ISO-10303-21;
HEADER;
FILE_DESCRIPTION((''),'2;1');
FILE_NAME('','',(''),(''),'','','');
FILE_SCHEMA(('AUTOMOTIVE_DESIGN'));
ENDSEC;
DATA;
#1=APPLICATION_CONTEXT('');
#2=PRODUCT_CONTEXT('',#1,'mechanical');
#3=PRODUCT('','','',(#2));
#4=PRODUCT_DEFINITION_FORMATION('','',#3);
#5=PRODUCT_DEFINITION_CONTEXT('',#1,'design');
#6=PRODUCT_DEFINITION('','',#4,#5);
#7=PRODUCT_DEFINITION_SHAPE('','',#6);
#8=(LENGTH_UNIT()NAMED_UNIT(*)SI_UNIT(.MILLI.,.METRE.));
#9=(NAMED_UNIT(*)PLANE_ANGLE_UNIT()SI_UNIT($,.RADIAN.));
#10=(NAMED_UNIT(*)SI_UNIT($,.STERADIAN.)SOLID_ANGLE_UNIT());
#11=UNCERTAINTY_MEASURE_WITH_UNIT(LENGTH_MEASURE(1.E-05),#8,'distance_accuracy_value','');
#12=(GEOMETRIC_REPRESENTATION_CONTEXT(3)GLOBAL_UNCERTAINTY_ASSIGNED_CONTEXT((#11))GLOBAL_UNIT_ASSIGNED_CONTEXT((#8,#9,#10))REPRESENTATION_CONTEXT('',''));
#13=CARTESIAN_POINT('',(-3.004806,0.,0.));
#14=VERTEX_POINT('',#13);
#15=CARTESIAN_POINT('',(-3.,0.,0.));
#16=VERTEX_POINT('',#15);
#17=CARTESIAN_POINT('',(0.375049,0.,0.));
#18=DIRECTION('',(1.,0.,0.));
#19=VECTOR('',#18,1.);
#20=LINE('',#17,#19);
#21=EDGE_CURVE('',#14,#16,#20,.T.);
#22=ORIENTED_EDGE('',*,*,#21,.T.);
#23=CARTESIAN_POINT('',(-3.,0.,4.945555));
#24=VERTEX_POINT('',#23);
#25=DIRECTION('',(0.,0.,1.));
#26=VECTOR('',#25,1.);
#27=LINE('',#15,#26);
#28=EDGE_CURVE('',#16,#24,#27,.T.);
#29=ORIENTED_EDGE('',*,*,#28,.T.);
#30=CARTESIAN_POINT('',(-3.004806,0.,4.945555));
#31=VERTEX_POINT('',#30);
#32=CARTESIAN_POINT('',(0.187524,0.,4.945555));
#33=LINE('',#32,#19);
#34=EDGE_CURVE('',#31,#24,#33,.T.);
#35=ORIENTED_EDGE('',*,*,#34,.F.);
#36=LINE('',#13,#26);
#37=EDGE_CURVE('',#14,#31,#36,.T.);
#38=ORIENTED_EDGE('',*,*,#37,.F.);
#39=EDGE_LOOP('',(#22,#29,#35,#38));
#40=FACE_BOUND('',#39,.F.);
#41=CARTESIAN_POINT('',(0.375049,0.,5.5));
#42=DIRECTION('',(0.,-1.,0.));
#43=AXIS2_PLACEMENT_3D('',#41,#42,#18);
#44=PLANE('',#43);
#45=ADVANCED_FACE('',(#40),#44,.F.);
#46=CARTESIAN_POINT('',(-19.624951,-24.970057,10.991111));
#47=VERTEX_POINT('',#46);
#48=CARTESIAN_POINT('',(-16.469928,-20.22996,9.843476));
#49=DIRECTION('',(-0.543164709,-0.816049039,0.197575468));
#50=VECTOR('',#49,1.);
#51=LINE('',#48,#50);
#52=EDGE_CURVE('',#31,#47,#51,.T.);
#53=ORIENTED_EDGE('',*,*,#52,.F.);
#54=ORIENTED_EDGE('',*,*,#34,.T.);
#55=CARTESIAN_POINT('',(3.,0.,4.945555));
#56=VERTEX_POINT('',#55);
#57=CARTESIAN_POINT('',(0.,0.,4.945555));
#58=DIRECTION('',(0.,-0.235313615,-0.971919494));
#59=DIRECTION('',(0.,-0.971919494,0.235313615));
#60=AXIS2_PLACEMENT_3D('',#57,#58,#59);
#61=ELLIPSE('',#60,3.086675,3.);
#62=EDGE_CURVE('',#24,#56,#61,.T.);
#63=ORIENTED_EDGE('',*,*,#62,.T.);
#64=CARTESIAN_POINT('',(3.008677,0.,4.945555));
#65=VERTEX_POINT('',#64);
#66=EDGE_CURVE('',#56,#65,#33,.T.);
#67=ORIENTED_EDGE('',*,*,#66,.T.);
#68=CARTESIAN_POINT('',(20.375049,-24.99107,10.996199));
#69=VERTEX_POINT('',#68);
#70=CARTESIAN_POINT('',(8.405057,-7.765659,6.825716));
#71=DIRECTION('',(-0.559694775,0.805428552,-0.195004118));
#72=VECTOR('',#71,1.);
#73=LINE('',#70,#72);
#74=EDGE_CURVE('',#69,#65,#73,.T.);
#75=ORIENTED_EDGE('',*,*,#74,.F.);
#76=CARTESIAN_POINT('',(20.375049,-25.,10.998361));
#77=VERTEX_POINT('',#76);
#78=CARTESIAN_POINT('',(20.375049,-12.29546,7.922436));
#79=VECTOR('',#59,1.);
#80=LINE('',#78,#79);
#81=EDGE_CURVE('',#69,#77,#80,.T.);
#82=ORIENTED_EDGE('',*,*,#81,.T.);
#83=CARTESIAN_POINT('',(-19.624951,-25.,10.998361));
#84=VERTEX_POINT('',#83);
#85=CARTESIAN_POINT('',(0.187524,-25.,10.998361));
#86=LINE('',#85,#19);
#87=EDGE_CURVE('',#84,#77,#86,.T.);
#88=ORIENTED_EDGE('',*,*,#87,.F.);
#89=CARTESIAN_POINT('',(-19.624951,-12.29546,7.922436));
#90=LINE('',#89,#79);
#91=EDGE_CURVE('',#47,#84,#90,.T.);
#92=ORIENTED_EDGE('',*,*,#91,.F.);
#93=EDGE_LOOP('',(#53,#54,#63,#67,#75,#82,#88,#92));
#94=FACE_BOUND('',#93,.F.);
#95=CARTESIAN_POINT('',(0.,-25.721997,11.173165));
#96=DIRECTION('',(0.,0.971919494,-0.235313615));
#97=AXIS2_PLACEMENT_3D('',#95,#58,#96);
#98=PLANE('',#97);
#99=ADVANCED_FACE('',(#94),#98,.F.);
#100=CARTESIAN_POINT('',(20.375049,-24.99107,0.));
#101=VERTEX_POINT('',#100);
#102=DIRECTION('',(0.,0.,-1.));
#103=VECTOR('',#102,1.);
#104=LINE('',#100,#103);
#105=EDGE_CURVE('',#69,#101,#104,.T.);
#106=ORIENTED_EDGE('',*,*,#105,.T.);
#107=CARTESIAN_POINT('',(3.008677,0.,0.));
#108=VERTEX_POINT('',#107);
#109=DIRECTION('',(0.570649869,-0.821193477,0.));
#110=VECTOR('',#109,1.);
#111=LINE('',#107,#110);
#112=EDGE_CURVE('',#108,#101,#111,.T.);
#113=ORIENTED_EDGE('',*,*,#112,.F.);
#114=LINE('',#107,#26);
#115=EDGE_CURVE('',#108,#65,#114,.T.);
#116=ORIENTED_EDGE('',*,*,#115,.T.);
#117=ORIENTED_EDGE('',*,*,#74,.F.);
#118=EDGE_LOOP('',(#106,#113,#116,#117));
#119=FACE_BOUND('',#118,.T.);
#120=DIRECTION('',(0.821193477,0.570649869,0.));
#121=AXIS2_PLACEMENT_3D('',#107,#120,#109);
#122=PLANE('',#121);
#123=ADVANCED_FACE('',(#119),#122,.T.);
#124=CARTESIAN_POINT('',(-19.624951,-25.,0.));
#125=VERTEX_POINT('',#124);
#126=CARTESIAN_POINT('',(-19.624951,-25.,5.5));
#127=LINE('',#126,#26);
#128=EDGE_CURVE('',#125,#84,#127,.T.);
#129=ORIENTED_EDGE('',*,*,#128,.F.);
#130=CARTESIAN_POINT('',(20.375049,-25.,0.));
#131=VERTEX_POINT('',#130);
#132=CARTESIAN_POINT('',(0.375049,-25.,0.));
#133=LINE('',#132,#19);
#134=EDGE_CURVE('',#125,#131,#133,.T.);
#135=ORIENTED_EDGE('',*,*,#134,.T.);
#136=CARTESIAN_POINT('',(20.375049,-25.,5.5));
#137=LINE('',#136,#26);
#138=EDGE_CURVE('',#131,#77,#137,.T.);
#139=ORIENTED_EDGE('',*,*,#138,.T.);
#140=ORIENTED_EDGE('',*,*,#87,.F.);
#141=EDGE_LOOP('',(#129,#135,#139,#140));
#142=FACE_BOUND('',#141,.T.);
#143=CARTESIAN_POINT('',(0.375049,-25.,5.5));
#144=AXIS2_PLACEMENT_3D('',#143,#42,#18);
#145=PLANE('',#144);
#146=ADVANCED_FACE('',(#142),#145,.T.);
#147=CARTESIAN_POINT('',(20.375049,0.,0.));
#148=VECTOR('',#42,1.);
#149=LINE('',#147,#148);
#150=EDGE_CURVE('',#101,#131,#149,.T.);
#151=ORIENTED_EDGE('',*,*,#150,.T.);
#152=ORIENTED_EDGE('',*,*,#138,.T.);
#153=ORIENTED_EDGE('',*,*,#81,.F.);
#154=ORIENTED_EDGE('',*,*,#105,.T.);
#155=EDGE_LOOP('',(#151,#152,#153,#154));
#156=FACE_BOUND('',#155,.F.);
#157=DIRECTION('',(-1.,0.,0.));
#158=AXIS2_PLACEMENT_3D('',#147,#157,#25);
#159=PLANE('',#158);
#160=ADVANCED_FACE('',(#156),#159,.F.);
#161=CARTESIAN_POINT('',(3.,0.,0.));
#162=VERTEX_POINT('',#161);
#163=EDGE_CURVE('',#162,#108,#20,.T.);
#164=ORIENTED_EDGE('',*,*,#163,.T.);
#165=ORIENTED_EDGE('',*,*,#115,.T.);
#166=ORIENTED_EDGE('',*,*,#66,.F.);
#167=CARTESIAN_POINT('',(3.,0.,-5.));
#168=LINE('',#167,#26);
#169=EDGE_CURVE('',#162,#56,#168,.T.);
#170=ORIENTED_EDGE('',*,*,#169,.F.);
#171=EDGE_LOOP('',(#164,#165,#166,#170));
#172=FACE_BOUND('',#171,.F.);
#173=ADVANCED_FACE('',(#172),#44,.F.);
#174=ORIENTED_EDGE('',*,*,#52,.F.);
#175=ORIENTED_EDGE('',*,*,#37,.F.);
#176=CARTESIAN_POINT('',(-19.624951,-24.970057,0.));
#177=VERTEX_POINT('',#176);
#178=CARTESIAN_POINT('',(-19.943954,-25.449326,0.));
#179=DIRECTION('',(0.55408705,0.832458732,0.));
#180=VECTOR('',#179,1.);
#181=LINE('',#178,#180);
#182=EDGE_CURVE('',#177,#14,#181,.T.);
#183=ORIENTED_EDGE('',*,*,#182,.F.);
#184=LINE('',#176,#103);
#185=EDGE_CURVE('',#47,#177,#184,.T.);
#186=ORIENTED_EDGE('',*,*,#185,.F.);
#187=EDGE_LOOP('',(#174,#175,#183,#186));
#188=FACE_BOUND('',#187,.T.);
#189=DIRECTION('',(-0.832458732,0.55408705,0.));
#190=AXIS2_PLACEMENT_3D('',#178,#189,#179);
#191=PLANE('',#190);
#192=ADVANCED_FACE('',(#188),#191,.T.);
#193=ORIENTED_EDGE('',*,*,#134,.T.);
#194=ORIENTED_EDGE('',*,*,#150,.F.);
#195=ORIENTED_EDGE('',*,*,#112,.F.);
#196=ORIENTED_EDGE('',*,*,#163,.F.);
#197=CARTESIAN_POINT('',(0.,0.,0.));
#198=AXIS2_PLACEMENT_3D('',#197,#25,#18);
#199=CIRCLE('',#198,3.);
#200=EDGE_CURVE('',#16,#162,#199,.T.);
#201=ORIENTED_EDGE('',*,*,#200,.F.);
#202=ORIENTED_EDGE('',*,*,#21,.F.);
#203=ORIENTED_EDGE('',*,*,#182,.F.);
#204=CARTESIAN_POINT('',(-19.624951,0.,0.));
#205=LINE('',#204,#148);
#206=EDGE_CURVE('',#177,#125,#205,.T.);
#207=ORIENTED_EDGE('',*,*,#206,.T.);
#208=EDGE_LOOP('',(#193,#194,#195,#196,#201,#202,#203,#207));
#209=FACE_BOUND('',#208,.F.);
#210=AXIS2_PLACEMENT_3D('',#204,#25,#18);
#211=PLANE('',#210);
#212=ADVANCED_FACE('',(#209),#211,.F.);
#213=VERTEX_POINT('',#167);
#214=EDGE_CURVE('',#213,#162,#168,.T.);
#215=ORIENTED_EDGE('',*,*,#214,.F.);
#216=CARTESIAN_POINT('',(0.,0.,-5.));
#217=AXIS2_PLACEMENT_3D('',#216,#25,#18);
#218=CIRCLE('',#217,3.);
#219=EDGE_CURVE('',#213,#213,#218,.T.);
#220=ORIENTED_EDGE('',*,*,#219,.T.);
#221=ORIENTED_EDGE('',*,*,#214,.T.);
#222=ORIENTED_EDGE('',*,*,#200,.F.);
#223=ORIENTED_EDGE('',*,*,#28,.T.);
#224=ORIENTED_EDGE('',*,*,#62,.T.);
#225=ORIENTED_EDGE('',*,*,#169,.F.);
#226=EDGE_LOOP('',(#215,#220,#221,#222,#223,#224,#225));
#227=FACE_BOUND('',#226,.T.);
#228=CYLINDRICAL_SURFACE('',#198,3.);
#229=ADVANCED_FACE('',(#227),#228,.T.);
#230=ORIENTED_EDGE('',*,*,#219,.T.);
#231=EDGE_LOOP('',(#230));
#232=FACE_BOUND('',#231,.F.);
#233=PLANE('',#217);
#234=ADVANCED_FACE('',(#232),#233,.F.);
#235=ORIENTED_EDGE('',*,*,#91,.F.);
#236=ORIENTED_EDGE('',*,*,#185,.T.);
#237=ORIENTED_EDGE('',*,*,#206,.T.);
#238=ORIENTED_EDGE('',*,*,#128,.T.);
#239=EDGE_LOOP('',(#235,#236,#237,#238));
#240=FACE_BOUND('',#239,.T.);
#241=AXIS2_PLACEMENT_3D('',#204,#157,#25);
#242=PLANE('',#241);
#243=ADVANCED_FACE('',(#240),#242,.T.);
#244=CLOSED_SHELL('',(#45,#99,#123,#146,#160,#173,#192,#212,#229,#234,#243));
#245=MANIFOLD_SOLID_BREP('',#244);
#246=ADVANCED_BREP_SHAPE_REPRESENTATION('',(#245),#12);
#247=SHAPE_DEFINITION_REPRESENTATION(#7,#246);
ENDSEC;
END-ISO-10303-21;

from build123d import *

# Parameters (mm, degrees)
F0_R     = 3
F1_DEPTH = 5
F2_W     = 40
F2_H     = 11
F3_DEPTH = 25
F5_DEPTH = 11.001
F7_DEPTH = 25


with BuildPart() as f1:
    # F0 (on Top) → F1 (new body, symmetric)
    with BuildSketch(Plane.XY):
        Circle(F0_R)
    extrude(amount=F1_DEPTH, both=True)

    # F2 (on Front) → F3 (join)
    with BuildSketch(Plane.XZ):
        with Locations((0.3750487044, 5.5)):
            Rectangle(F2_W, F2_H)
    extrude(amount=F3_DEPTH)

    # F4 (on Top) → F5 (cut, through all)
    with BuildSketch(Plane.XY):
        Polygon((-19.9439544231, -25.4493262619), (-3.0048058834, 0), (-26.9990675151, 2.6770541444), align=None)
        Polygon((32.6401479542, 2.6770541444), (3.0086771585, 0), (20.6934921443, -25.4493262619), align=None)
    extrude(amount=F5_DEPTH, mode=Mode.SUBTRACT)


with BuildPart() as f7:
    # F6 (on Right) → F7 (new body, symmetric)
    with BuildSketch(Plane.YZ):
        Polygon((6.2013822608, 13.6782731861), (-25.7219970226, 11.1731654033), (6.2013822608, 3.444124246), align=None)
    extrude(amount=F7_DEPTH, both=True)


with BuildPart() as f1_1:
    add(f1.part)

    # F8: cut F7
    add(f7.part, mode=Mode.SUBTRACT)


solid = f1_1.part
